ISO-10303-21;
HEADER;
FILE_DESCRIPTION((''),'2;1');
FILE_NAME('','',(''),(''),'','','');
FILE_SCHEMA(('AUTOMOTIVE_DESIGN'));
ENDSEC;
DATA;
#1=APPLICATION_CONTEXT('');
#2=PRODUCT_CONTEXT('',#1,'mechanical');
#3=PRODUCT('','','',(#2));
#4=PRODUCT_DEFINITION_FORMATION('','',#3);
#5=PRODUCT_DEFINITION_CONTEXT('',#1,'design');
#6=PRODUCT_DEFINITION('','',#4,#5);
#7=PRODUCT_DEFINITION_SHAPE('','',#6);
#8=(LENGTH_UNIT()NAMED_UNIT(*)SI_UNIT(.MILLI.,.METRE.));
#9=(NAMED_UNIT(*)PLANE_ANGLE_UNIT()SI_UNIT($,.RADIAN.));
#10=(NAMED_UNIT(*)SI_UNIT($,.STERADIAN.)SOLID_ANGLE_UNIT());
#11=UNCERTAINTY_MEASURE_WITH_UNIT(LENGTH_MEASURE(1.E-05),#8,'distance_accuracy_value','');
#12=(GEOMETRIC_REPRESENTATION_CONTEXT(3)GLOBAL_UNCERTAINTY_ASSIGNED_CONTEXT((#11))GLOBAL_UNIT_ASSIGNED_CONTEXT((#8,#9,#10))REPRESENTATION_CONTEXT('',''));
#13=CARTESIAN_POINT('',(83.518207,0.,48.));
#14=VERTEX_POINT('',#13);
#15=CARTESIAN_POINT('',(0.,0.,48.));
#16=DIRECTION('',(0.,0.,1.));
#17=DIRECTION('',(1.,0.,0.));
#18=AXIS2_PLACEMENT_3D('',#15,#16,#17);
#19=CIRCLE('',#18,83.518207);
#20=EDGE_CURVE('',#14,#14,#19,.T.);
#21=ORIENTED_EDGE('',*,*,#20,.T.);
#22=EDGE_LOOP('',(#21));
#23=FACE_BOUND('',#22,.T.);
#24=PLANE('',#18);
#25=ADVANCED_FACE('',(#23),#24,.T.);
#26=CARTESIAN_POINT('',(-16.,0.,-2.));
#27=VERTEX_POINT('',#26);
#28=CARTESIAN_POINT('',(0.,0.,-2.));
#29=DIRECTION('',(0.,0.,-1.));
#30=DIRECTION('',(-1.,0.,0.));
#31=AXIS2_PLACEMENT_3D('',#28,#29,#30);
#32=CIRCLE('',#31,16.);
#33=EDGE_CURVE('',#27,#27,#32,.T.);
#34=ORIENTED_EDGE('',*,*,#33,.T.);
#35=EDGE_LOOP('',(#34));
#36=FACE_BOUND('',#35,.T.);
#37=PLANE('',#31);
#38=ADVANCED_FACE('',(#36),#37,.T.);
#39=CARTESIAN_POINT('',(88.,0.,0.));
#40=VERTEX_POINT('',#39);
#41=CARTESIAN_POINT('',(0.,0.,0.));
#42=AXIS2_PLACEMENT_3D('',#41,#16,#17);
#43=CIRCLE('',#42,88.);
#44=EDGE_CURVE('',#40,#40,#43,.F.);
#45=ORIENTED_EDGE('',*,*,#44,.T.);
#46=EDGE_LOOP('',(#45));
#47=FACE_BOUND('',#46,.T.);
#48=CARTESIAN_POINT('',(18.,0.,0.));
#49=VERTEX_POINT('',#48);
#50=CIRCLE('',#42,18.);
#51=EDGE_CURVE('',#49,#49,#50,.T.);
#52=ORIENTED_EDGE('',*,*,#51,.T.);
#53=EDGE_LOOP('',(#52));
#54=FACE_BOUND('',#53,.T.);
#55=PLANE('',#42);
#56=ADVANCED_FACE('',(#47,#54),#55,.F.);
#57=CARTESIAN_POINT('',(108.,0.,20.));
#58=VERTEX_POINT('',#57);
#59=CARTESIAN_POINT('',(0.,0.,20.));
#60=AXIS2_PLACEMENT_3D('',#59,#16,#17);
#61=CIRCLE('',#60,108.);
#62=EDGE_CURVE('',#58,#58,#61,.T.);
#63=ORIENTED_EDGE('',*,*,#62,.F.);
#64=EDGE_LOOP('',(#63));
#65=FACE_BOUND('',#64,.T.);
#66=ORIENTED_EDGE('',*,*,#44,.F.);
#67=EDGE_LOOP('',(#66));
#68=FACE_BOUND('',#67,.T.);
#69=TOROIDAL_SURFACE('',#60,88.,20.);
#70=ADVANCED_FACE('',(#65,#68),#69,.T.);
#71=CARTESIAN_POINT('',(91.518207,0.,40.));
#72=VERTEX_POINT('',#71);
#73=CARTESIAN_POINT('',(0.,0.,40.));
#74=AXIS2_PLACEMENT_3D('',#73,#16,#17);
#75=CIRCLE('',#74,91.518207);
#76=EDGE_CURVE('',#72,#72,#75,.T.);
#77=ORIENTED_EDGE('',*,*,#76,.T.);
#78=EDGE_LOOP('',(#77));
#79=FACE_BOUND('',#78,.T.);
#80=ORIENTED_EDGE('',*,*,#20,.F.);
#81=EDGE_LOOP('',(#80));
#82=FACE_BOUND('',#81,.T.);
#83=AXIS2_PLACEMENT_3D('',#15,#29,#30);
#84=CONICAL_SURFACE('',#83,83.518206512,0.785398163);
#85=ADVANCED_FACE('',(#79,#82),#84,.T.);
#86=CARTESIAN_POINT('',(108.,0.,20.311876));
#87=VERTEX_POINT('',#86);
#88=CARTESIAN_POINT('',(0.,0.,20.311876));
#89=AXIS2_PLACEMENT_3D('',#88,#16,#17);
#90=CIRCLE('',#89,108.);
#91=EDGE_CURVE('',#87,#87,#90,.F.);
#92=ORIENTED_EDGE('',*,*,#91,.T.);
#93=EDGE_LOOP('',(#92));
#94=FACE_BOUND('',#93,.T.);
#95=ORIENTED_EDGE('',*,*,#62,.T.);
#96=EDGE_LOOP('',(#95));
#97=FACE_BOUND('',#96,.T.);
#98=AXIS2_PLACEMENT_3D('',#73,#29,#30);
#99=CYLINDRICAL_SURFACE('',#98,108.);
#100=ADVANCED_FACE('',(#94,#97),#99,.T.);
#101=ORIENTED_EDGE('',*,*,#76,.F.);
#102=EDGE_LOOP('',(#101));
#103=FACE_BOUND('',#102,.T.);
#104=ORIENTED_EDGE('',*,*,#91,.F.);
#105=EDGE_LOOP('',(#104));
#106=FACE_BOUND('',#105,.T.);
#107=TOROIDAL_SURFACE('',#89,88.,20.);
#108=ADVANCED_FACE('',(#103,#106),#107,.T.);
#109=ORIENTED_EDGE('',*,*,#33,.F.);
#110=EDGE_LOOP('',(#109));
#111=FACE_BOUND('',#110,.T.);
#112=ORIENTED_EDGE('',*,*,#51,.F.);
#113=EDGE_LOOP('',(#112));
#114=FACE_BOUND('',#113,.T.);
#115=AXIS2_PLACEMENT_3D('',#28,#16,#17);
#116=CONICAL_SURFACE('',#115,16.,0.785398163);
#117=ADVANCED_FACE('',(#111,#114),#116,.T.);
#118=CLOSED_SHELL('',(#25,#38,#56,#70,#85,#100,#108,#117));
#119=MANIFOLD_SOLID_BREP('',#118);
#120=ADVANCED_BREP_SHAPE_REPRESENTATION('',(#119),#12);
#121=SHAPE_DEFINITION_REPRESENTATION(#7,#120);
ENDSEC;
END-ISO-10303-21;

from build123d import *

# Parameters (mm, degrees)
SKETCH1_R           = 108
BOSS_EXTRUDE1_DEPTH = 40
SKETCH3_R           = 91.518206512
BOSS_EXTRUDE3_DEPTH = 8
CHAMFER1_SIZE       = 8
FILLET2_R           = 20
SKETCH5_R           = 20
BOSS_EXTRUDE4_DEPTH = 2
CHAMFER2_SIZE       = 4


# Some blends are built 0.0001 mm under size
with BuildPart() as part:
    # Sketch1 → Boss-Extrude1 (new body)
    with BuildSketch(Plane.XY):
        Circle(SKETCH1_R)
    extrude(amount=BOSS_EXTRUDE1_DEPTH)

    # Sketch3 → Boss-Extrude3 (add)
    with BuildSketch(Plane.XY.offset(40)):
        Circle(SKETCH3_R)
    extrude(amount=BOSS_EXTRUDE3_DEPTH)

    # Chamfer1
    chamfer1_edges = [part.edges().sort_by_distance(p)[0] for p in [
        (-91.518206512, 0, 48),
    ]]
    chamfer(chamfer1_edges, length=CHAMFER1_SIZE - 0.0001)  # a hair under: the kernel refuses the full size

    # Fillet2
    # the kernel refuses this fillet: 20 mm, written as the material it takes off along each edge
    with BuildSketch(Plane(origin=(0, 0, 0), x_dir=(1, 0, 0), z_dir=(0, -1, 0))) as fillet2_piece_1:
        with BuildLine():
            CenterArc((108 - FILLET2_R, FILLET2_R), FILLET2_R, 270, 90)
            Line((108 - FILLET2_R, 0), (108 - FILLET2_R, -FILLET2_R * 0.02))
            Line((108 - FILLET2_R, -FILLET2_R * 0.02), (108 + FILLET2_R * 0.02, -FILLET2_R * 0.02))
            Line((108 + FILLET2_R * 0.02, -FILLET2_R * 0.02), (108 + FILLET2_R * 0.02, FILLET2_R))
            Line((108 + FILLET2_R * 0.02, FILLET2_R), (108, FILLET2_R))
        make_face()
    revolve(axis=Axis((0, 0, 0), (0, 0, 1)), mode=Mode.SUBTRACT)
    with BuildSketch(Plane(origin=(0, 0, 40), x_dir=(1, 0, 0), z_dir=(0, -1, 0))) as fillet2_piece_2:
        with BuildLine():
            CenterArc((88, -19.688123906), FILLET2_R, 0, 79.868362225)
            Line((108, -19.688123906), (108.4, -19.688123906))
            Line((108.4, -19.688123906), (108.4, 0))
            Line((108.4, 0), (108, 0.4))
            ThreePointArc((108, 0.4), (99.759103256, 0.4), (91.588570642, 0.393762478))
            Line((91.588570642, 0.393762478), (91.518206512, 0))
        make_face()
    revolve(axis=Axis((0, 0, 40), (0, 0, 1)), mode=Mode.SUBTRACT)

    # Sketch5 → Boss-Extrude4 (add)
    with BuildSketch(Plane(origin=(0, 0, 0), x_dir=(-1, 0, 0), z_dir=(0, 0, -1))):
        with Locations(Location((0, 0, 0), (0, 0, 180))):
            Circle(SKETCH5_R)
    extrude(amount=BOSS_EXTRUDE4_DEPTH)

    # Chamfer2
    # the kernel refuses this chamfer: 4 mm, written as the material it takes off along each edge
    with BuildSketch(Plane(origin=(0, 0, -2), x_dir=(1, 0, 0), z_dir=(0, 1, 0))) as chamfer2_piece_1_section:
        Polygon((20, -CHAMFER2_SIZE), (20 - CHAMFER2_SIZE, 0), (20, 0), align=None)
    chamfer2_piece_1 = revolve(axis=Axis((0, 0, -2), (0, 0, -1)), mode=Mode.PRIVATE)
    chamfer2_piece_1 = split(chamfer2_piece_1, bisect_by=Plane(origin=(-17.007894049, 0, 0), z_dir=(0, 0, -1)), keep=Keep.TOP, mode=Mode.PRIVATE)
    add(chamfer2_piece_1, mode=Mode.SUBTRACT)


solid = part.part
